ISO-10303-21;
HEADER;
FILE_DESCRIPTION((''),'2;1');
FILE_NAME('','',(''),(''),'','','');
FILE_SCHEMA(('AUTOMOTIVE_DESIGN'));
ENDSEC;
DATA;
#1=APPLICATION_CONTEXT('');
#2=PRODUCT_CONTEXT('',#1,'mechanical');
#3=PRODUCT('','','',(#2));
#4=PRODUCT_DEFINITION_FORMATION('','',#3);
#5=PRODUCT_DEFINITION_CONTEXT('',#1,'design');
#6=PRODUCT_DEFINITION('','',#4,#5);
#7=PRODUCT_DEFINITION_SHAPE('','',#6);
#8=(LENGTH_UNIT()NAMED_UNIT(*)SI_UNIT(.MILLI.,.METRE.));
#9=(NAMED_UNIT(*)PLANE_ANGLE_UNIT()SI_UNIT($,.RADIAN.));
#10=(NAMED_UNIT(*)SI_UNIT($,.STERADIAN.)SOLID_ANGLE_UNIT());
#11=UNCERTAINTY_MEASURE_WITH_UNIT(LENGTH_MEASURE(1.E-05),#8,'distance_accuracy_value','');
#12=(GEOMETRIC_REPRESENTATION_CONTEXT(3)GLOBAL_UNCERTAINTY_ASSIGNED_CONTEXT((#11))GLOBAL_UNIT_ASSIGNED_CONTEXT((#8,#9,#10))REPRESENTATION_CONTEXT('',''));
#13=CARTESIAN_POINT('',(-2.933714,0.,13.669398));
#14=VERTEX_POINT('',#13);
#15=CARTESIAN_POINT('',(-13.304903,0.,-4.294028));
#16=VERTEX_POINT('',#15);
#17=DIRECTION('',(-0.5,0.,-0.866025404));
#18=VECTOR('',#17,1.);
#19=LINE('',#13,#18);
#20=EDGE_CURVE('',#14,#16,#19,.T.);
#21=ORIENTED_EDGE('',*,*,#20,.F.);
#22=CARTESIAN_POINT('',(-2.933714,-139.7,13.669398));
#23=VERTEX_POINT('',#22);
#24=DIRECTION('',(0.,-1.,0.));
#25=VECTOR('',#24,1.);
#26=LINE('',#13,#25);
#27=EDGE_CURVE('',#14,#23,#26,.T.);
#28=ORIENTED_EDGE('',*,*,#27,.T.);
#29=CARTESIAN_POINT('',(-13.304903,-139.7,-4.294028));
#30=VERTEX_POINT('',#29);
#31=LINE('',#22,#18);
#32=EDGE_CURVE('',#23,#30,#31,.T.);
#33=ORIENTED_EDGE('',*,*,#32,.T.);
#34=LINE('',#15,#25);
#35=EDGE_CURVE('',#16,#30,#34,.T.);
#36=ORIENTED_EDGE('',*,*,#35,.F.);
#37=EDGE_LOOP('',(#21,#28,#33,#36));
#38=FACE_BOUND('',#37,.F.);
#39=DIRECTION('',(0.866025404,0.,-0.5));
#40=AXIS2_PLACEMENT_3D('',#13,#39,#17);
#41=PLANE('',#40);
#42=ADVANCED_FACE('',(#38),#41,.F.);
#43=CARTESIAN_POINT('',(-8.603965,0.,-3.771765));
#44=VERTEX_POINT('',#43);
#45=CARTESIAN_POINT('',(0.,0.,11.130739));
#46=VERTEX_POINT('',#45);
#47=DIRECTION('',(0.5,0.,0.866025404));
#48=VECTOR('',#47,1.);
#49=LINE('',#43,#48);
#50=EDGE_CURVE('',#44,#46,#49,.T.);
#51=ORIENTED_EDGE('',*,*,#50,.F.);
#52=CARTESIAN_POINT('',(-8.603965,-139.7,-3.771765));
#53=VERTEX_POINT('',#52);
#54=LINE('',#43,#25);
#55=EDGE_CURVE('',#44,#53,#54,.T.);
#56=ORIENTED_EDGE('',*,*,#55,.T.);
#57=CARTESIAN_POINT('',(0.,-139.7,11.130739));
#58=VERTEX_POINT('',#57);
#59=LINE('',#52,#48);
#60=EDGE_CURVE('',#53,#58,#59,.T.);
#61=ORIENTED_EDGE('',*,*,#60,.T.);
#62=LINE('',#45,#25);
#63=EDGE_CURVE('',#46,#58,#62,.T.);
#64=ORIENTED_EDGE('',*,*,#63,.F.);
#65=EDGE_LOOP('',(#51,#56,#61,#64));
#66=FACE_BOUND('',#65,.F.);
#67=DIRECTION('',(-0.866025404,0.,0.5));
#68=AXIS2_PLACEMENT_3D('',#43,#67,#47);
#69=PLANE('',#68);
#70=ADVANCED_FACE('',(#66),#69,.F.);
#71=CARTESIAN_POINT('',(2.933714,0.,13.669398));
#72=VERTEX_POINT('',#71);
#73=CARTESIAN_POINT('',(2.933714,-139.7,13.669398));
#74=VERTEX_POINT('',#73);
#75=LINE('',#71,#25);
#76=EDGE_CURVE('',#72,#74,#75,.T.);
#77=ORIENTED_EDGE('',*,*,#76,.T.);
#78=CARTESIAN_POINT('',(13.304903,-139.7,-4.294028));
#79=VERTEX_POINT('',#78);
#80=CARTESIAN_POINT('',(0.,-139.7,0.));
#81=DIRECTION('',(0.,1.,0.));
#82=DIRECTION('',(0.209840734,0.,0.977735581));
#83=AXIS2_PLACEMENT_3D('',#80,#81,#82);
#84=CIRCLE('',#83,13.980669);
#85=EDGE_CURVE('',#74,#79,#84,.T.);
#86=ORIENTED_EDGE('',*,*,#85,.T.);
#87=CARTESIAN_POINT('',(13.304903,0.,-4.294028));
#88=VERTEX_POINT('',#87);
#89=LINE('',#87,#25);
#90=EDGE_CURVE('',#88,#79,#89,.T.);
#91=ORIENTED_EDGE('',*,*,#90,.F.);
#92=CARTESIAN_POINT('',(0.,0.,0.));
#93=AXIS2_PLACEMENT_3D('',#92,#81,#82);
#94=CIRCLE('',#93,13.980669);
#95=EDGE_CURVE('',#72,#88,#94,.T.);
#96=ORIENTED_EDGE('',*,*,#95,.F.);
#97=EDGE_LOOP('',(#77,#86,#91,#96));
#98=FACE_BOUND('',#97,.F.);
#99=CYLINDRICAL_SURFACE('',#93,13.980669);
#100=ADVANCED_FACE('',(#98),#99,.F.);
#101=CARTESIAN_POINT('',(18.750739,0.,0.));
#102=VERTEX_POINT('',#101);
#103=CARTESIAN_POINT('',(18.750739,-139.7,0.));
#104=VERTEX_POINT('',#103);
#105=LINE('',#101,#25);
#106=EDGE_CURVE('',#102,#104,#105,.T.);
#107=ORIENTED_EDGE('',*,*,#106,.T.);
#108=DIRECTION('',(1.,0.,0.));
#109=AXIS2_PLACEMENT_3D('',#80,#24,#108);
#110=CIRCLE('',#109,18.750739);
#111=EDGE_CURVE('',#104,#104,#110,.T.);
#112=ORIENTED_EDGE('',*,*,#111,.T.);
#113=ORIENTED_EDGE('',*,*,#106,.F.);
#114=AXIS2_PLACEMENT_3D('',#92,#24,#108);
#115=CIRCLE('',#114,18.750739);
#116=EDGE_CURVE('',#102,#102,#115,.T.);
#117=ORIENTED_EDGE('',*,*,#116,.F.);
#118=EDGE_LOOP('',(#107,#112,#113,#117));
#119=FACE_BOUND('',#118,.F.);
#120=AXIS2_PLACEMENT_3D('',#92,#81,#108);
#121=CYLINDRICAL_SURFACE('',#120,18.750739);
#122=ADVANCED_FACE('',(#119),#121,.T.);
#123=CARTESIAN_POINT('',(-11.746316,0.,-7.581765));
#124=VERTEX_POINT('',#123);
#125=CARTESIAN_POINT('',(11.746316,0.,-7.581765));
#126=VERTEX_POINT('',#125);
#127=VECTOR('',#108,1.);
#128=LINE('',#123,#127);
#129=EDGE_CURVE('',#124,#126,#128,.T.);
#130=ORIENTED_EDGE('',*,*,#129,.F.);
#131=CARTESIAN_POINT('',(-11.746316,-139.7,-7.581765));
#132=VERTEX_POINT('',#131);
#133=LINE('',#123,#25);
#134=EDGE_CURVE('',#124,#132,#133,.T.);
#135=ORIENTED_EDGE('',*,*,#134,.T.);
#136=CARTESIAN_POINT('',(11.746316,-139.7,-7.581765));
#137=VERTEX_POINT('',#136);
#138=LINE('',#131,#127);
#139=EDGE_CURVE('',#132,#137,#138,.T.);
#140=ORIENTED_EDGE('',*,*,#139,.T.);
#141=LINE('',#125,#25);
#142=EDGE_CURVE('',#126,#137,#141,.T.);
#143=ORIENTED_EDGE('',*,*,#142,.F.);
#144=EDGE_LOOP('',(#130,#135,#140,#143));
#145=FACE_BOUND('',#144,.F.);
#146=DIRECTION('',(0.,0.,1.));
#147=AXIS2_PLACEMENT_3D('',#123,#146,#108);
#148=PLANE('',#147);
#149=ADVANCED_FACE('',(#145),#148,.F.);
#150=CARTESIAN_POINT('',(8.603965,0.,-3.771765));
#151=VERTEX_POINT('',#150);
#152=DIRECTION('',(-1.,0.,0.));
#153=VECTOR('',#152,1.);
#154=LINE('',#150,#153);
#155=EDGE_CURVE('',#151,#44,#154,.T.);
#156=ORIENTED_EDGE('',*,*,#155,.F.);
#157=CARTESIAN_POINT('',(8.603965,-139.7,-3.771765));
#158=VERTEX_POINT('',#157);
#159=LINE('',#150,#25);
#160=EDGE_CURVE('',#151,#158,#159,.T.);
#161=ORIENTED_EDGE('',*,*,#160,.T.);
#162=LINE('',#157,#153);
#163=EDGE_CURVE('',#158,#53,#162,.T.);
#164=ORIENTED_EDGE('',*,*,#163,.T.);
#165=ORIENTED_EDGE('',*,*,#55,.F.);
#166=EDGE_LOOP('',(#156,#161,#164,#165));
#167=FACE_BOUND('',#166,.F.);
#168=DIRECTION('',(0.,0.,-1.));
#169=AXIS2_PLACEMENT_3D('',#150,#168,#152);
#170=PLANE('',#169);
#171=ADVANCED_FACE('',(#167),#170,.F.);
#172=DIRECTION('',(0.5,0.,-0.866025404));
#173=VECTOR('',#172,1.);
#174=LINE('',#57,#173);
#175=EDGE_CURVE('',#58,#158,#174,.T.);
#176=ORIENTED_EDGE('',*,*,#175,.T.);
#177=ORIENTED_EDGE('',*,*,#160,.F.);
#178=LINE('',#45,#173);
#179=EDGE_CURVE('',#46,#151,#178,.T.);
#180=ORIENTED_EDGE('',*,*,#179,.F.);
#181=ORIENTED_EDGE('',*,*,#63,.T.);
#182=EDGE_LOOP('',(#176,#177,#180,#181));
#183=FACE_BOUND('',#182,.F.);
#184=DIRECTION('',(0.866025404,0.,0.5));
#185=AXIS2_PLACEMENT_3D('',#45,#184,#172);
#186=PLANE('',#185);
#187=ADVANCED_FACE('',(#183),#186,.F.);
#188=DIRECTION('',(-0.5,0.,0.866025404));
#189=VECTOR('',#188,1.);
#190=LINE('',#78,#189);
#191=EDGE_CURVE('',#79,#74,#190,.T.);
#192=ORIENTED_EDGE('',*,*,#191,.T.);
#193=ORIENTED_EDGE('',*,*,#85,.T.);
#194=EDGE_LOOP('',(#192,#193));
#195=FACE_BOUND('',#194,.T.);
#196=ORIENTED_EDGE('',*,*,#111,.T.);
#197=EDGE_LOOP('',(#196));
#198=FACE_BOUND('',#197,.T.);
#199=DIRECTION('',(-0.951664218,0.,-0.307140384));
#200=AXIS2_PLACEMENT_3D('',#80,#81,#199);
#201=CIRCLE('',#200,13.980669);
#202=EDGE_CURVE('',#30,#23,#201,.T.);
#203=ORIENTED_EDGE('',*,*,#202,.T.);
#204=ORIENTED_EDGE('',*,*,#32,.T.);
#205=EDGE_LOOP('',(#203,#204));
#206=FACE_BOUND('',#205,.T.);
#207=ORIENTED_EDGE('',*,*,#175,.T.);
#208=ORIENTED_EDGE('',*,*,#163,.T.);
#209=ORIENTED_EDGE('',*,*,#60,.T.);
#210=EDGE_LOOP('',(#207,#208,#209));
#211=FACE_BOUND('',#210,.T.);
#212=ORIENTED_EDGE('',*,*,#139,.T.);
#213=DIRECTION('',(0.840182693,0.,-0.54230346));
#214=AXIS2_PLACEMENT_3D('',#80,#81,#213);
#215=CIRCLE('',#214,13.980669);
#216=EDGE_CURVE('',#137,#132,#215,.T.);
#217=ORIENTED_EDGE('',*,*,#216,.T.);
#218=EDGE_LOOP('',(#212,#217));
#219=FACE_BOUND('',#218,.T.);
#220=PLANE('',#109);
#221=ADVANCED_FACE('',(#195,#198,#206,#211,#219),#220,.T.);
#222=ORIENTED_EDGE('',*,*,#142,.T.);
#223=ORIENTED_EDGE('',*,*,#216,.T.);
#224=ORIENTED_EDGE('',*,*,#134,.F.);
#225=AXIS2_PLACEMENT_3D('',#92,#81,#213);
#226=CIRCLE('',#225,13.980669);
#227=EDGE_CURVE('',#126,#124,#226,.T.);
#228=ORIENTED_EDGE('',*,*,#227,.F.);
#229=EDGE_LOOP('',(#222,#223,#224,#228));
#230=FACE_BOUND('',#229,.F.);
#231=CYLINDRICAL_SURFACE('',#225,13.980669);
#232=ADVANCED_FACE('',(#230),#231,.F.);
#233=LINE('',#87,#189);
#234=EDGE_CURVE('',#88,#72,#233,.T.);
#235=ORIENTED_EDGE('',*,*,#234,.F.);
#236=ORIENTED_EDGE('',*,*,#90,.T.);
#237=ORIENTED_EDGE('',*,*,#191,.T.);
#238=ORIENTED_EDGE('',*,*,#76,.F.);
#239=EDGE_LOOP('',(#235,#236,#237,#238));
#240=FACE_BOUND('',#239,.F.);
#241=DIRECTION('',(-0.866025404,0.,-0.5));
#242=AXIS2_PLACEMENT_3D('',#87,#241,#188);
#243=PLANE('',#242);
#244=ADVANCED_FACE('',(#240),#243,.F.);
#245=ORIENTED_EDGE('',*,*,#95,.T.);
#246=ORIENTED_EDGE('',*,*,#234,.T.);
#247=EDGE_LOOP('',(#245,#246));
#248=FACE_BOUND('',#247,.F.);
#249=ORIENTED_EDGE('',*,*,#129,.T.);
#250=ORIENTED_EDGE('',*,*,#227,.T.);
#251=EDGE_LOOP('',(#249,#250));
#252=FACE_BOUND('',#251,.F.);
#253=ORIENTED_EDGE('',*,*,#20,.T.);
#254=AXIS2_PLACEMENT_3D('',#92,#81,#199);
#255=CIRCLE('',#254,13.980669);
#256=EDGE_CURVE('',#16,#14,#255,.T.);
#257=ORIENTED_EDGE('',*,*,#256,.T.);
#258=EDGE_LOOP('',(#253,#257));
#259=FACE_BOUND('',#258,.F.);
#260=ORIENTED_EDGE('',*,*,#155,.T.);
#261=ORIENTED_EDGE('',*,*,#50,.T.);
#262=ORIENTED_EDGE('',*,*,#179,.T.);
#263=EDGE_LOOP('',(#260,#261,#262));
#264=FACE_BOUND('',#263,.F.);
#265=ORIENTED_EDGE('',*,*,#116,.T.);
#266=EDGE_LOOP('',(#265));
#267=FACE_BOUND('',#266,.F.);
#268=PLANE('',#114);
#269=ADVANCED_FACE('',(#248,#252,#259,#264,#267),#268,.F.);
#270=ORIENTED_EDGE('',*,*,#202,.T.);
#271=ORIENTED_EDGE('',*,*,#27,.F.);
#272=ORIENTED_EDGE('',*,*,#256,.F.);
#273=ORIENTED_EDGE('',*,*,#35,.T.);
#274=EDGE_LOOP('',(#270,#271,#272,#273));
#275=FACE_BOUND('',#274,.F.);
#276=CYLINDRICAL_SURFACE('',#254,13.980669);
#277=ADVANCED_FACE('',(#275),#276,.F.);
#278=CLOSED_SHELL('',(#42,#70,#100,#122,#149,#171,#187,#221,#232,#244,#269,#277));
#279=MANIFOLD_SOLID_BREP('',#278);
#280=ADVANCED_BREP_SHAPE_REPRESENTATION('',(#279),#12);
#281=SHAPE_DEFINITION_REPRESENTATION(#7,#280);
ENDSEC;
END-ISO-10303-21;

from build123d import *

# Parameters (mm, degrees)
F0_R     = 18.7507393172
F0_W     = 2.8121968498
F0_H     = 2.6235150942
F1_DEPTH = 139.7


# Not quite as in the source:
# - a feature names something its author has since deleted; it is built from what else it names


with BuildPart() as f1:
    # F0 (on Front) → F1 (new body)
    with BuildSketch(Plane.XZ):
        Circle(F0_R)
        with BuildLine():
            ThreePointArc((11.7463163557, -7.5817653145), (0, -13.9806692691), (-11.7463163557, -7.5817653145))
            Line((-11.7463163557, -7.5817653145), (11.7463163557, -7.5817653145))
        make_face(mode=Mode.SUBTRACT)
        with BuildLine():
            ThreePointArc((-13.3049026907, -4.2940281328), (-12.107614749, 6.9903346346), (-2.9337138978, 13.6693977914))
            Line((-2.9337138978, 13.6693977914), (-13.3049026907, -4.2940281328))
        make_face(mode=Mode.SUBTRACT)
        with Locations((-0.1412869315, 14.9811553385)):
            Rectangle(F0_W, F0_H, mode=Mode.SUBTRACT)
        Polygon((-8.6039650607, -3.7717653145), (0, 11.1307393172), (8.6039650607, -3.7717653145), align=None, mode=Mode.SUBTRACT)
        with BuildLine():
            ThreePointArc((2.9337138978, 13.6693977914), (12.107614749, 6.9903346346), (13.3049026907, -4.2940281328))
            Line((13.3049026907, -4.2940281328), (2.9337138978, 13.6693977914))
        make_face(mode=Mode.SUBTRACT)
        with Locations((-0.1412869315, 14.9811553385)):
            Rectangle(F0_W, F0_H)
    extrude(amount=F1_DEPTH)


solid = f1.part
